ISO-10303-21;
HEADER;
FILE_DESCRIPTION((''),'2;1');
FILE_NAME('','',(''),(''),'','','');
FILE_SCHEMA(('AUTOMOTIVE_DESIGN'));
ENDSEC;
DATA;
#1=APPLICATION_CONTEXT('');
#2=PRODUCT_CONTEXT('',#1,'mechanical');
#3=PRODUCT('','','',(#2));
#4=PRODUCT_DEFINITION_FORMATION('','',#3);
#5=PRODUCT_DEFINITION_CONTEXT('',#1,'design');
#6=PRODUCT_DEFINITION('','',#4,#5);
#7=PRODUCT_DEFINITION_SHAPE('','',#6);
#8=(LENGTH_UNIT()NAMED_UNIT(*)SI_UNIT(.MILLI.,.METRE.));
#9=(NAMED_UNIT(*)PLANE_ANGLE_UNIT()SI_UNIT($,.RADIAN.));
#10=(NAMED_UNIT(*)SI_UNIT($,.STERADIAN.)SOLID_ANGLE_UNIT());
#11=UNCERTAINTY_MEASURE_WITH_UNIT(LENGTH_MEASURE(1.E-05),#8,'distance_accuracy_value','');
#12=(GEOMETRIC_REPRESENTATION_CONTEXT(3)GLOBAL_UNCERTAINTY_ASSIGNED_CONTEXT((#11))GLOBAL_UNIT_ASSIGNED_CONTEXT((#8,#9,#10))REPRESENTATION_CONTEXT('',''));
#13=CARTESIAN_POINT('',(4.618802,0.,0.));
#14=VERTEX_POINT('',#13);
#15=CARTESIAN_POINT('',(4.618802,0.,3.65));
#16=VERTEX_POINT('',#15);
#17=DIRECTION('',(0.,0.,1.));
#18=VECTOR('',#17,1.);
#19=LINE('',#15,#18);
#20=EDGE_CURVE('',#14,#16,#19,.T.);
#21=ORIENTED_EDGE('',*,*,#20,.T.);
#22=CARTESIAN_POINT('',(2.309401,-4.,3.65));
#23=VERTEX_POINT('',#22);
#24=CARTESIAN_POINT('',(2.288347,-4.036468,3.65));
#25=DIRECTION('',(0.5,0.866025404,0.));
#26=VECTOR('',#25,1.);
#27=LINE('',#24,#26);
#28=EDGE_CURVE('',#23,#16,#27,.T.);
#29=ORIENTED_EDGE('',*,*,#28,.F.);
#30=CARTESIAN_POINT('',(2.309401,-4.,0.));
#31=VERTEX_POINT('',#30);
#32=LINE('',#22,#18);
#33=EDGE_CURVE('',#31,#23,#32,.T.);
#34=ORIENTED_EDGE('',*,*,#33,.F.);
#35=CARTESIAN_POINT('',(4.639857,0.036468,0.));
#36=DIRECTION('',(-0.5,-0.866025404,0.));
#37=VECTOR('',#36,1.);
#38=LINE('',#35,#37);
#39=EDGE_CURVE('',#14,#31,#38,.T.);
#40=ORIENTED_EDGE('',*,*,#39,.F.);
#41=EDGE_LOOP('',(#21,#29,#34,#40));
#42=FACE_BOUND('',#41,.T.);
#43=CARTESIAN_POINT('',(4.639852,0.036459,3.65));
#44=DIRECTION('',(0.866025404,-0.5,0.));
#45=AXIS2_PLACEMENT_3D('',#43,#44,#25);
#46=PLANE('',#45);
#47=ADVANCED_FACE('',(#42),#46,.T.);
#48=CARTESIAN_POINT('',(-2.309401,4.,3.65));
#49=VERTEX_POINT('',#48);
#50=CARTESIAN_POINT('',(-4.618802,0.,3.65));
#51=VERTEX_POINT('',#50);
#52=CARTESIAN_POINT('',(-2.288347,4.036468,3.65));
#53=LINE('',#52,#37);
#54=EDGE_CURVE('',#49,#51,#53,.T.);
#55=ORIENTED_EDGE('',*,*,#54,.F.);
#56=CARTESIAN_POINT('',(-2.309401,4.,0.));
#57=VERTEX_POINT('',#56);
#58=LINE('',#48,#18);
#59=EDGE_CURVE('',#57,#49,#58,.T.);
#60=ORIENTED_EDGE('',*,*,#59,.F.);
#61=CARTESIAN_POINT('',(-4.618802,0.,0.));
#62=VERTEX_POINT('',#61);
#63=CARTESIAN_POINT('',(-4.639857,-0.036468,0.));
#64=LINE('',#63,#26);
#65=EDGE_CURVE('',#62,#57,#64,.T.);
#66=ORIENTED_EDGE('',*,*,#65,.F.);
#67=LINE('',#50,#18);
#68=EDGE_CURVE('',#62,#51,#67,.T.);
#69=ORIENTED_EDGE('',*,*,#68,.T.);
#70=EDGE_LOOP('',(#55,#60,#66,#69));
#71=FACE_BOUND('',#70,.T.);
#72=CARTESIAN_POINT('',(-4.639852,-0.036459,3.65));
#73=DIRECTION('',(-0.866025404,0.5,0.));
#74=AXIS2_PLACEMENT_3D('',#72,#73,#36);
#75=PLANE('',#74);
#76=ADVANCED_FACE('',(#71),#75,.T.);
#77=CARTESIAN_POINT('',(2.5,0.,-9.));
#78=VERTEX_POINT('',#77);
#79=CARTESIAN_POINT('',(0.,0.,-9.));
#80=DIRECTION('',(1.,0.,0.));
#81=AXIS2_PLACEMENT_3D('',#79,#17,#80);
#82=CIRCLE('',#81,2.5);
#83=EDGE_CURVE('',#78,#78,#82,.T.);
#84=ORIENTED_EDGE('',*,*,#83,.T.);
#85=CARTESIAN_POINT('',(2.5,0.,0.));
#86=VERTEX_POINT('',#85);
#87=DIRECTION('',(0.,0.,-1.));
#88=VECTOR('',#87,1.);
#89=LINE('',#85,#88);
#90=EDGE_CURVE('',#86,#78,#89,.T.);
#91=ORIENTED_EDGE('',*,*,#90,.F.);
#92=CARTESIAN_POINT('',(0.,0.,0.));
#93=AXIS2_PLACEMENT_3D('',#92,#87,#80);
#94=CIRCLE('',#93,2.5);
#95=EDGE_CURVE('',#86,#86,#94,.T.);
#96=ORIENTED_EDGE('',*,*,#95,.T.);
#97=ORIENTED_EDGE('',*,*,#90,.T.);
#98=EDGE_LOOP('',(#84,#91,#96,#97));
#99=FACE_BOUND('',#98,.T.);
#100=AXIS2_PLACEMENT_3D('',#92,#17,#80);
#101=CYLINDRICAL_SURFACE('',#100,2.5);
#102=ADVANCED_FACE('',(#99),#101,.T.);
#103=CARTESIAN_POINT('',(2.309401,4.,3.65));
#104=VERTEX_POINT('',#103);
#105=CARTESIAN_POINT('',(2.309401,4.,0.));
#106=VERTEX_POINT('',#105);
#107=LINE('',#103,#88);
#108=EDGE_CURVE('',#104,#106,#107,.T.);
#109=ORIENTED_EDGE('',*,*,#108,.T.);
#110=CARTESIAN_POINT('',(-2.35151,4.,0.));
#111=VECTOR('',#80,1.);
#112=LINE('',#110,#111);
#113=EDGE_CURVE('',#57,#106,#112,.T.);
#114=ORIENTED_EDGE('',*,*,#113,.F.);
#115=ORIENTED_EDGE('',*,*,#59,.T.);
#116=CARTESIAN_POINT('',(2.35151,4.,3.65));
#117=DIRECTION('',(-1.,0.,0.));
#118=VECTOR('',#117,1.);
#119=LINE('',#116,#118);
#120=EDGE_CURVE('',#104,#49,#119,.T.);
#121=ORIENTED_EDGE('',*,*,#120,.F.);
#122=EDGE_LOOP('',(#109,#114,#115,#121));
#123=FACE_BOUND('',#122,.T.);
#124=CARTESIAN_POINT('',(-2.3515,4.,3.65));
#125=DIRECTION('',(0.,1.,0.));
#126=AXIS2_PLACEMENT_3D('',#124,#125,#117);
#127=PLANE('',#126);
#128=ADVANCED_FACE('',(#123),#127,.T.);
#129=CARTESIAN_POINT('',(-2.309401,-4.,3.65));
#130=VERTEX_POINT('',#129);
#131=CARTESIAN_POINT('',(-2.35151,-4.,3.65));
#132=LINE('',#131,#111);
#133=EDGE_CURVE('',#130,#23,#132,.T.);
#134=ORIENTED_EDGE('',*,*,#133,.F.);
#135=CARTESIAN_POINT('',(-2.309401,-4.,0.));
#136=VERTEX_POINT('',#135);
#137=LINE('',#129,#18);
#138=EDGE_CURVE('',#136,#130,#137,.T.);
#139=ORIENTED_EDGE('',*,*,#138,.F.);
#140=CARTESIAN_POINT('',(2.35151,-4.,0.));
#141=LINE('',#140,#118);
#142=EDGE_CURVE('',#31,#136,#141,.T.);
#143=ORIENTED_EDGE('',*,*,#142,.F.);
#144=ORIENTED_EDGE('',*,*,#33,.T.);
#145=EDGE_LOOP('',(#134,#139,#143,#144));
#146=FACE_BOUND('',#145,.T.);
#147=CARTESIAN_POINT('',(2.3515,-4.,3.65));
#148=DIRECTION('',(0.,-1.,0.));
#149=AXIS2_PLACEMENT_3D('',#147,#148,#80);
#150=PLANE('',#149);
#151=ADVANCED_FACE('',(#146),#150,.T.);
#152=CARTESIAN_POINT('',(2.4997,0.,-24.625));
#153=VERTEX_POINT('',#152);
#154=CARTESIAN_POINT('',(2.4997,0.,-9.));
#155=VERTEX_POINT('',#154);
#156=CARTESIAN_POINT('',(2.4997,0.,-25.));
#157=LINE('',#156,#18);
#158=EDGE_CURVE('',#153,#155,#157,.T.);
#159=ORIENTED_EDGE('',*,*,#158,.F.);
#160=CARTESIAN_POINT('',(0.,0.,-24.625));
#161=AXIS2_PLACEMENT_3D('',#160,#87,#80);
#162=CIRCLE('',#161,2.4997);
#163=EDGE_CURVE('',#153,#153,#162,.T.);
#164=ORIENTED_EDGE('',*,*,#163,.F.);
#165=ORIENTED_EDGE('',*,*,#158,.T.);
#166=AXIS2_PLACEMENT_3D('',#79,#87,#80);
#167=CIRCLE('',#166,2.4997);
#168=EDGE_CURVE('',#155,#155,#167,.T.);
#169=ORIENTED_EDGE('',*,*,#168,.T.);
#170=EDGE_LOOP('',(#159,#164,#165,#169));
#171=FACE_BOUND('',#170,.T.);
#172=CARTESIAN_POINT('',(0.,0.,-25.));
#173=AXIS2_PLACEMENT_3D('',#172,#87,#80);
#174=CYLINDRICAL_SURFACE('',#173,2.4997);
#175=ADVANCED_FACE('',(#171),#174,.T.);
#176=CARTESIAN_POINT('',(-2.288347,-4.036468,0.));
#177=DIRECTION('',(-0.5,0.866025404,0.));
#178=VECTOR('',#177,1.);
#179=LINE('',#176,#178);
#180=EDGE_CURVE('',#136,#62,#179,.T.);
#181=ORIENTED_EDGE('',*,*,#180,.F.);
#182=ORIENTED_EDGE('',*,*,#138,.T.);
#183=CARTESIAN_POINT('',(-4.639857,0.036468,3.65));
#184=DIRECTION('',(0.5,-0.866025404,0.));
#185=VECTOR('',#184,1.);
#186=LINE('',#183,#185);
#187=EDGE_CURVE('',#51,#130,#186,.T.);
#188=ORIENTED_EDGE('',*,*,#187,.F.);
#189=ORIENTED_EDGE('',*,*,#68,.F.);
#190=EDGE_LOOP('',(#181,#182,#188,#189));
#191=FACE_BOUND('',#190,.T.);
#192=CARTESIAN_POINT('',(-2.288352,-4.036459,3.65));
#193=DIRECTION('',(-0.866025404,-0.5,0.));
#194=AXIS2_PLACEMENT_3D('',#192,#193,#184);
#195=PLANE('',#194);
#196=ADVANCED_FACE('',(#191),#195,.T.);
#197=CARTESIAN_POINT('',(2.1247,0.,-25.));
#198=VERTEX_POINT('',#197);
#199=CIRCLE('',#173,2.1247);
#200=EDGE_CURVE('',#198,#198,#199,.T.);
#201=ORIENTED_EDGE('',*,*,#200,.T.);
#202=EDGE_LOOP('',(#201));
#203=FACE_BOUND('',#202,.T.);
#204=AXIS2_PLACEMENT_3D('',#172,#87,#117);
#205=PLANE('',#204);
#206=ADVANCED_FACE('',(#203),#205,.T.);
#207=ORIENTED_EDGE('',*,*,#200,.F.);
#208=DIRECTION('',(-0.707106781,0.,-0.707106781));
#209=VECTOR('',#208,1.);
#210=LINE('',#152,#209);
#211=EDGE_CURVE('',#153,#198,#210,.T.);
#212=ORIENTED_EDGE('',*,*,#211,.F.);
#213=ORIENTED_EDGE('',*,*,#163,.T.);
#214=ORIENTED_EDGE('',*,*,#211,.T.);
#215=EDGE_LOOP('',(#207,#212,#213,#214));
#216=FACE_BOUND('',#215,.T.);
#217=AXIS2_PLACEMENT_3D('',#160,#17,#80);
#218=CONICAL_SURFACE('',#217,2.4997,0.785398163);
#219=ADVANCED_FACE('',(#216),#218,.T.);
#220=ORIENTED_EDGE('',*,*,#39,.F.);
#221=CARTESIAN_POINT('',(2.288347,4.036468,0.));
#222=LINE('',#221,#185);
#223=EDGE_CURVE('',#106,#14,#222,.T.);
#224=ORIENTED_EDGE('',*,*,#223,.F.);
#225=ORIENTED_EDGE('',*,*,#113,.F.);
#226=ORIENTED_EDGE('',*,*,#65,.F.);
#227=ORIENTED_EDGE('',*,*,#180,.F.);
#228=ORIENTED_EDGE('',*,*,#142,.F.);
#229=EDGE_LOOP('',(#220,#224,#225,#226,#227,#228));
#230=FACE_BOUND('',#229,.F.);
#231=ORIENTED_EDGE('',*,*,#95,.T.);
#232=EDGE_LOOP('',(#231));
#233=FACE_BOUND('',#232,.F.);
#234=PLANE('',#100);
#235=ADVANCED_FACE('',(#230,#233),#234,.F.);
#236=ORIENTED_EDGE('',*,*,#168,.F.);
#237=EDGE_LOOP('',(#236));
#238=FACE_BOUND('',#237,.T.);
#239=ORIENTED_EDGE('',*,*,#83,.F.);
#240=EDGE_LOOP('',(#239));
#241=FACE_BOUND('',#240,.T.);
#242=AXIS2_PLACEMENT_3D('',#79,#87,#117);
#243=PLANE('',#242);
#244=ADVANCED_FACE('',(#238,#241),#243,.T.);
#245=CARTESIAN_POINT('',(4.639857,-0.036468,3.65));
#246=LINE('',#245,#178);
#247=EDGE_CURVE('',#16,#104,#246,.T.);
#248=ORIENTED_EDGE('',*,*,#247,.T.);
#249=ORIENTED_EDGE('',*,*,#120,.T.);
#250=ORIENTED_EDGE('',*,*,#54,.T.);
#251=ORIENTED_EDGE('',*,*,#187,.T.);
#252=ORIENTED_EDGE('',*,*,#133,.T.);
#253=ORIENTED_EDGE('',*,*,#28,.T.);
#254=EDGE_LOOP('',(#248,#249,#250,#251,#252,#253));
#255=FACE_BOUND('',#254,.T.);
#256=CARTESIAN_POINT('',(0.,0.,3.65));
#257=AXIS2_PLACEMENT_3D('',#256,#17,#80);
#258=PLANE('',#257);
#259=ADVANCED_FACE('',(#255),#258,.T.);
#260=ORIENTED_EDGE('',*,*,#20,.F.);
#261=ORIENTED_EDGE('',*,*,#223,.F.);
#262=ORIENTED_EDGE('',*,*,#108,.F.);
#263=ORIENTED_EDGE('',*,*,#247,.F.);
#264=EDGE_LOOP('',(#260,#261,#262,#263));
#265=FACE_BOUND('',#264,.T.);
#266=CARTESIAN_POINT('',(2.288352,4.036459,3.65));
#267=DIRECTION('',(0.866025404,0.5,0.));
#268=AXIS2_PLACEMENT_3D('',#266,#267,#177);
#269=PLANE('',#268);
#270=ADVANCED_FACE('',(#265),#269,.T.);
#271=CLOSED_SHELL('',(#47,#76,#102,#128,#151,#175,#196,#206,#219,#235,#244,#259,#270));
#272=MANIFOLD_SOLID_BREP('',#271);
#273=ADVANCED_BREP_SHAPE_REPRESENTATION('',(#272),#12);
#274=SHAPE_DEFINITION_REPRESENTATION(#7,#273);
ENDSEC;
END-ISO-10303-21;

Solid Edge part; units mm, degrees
sketch "Sketch1" plane through (0, 0, 0) normal (0, 0, 1) x (1, 0, 0)
  circle A0 centre (0, 0) radius 4.64
  dimension "D1" = 9.28
extrude "Protrusion1" add sketch "Sketch1" along normal blind 3.65
sketch "Sketch2" plane through (0, 0, 0) normal (0, 0, -1) x (1, 0, 0)
  circle A0 centre (0, 0) radius 2.5
extrude "Protrusion2" add sketch "Sketch2" along normal blind 25
sketch "Sketch3" plane through (0, 0, -25) normal (0, 0, -1) x (1, 0, 0)
  circle A0 centre (0, 0) radius 2.4997
extrude "Cutout1" cut sketch "Sketch3" against normal blind 16 flip side to cut
chamfer "Chamfer_1" distance 0.375 angle 45 1 edges at (-2.4997, 0, -25)
sketch "Sketch4" plane through (0, 0, 3.65) normal (0, 0, 1) x (1, 0, 0)
  line L0 (-2.3515, 4) -> (2.3515, 4)
  dimension "D1" = 8
extrude "Cutout2" cut sketch "Sketch4" against normal up to next material side at (0, 4.05, 3.65)
pattern_circular "Pattern1" count 6 over 360 about axis through (0, 0, 3.65) along (0, 0, 1) of "Cutout2"
properties part number "24101191"
